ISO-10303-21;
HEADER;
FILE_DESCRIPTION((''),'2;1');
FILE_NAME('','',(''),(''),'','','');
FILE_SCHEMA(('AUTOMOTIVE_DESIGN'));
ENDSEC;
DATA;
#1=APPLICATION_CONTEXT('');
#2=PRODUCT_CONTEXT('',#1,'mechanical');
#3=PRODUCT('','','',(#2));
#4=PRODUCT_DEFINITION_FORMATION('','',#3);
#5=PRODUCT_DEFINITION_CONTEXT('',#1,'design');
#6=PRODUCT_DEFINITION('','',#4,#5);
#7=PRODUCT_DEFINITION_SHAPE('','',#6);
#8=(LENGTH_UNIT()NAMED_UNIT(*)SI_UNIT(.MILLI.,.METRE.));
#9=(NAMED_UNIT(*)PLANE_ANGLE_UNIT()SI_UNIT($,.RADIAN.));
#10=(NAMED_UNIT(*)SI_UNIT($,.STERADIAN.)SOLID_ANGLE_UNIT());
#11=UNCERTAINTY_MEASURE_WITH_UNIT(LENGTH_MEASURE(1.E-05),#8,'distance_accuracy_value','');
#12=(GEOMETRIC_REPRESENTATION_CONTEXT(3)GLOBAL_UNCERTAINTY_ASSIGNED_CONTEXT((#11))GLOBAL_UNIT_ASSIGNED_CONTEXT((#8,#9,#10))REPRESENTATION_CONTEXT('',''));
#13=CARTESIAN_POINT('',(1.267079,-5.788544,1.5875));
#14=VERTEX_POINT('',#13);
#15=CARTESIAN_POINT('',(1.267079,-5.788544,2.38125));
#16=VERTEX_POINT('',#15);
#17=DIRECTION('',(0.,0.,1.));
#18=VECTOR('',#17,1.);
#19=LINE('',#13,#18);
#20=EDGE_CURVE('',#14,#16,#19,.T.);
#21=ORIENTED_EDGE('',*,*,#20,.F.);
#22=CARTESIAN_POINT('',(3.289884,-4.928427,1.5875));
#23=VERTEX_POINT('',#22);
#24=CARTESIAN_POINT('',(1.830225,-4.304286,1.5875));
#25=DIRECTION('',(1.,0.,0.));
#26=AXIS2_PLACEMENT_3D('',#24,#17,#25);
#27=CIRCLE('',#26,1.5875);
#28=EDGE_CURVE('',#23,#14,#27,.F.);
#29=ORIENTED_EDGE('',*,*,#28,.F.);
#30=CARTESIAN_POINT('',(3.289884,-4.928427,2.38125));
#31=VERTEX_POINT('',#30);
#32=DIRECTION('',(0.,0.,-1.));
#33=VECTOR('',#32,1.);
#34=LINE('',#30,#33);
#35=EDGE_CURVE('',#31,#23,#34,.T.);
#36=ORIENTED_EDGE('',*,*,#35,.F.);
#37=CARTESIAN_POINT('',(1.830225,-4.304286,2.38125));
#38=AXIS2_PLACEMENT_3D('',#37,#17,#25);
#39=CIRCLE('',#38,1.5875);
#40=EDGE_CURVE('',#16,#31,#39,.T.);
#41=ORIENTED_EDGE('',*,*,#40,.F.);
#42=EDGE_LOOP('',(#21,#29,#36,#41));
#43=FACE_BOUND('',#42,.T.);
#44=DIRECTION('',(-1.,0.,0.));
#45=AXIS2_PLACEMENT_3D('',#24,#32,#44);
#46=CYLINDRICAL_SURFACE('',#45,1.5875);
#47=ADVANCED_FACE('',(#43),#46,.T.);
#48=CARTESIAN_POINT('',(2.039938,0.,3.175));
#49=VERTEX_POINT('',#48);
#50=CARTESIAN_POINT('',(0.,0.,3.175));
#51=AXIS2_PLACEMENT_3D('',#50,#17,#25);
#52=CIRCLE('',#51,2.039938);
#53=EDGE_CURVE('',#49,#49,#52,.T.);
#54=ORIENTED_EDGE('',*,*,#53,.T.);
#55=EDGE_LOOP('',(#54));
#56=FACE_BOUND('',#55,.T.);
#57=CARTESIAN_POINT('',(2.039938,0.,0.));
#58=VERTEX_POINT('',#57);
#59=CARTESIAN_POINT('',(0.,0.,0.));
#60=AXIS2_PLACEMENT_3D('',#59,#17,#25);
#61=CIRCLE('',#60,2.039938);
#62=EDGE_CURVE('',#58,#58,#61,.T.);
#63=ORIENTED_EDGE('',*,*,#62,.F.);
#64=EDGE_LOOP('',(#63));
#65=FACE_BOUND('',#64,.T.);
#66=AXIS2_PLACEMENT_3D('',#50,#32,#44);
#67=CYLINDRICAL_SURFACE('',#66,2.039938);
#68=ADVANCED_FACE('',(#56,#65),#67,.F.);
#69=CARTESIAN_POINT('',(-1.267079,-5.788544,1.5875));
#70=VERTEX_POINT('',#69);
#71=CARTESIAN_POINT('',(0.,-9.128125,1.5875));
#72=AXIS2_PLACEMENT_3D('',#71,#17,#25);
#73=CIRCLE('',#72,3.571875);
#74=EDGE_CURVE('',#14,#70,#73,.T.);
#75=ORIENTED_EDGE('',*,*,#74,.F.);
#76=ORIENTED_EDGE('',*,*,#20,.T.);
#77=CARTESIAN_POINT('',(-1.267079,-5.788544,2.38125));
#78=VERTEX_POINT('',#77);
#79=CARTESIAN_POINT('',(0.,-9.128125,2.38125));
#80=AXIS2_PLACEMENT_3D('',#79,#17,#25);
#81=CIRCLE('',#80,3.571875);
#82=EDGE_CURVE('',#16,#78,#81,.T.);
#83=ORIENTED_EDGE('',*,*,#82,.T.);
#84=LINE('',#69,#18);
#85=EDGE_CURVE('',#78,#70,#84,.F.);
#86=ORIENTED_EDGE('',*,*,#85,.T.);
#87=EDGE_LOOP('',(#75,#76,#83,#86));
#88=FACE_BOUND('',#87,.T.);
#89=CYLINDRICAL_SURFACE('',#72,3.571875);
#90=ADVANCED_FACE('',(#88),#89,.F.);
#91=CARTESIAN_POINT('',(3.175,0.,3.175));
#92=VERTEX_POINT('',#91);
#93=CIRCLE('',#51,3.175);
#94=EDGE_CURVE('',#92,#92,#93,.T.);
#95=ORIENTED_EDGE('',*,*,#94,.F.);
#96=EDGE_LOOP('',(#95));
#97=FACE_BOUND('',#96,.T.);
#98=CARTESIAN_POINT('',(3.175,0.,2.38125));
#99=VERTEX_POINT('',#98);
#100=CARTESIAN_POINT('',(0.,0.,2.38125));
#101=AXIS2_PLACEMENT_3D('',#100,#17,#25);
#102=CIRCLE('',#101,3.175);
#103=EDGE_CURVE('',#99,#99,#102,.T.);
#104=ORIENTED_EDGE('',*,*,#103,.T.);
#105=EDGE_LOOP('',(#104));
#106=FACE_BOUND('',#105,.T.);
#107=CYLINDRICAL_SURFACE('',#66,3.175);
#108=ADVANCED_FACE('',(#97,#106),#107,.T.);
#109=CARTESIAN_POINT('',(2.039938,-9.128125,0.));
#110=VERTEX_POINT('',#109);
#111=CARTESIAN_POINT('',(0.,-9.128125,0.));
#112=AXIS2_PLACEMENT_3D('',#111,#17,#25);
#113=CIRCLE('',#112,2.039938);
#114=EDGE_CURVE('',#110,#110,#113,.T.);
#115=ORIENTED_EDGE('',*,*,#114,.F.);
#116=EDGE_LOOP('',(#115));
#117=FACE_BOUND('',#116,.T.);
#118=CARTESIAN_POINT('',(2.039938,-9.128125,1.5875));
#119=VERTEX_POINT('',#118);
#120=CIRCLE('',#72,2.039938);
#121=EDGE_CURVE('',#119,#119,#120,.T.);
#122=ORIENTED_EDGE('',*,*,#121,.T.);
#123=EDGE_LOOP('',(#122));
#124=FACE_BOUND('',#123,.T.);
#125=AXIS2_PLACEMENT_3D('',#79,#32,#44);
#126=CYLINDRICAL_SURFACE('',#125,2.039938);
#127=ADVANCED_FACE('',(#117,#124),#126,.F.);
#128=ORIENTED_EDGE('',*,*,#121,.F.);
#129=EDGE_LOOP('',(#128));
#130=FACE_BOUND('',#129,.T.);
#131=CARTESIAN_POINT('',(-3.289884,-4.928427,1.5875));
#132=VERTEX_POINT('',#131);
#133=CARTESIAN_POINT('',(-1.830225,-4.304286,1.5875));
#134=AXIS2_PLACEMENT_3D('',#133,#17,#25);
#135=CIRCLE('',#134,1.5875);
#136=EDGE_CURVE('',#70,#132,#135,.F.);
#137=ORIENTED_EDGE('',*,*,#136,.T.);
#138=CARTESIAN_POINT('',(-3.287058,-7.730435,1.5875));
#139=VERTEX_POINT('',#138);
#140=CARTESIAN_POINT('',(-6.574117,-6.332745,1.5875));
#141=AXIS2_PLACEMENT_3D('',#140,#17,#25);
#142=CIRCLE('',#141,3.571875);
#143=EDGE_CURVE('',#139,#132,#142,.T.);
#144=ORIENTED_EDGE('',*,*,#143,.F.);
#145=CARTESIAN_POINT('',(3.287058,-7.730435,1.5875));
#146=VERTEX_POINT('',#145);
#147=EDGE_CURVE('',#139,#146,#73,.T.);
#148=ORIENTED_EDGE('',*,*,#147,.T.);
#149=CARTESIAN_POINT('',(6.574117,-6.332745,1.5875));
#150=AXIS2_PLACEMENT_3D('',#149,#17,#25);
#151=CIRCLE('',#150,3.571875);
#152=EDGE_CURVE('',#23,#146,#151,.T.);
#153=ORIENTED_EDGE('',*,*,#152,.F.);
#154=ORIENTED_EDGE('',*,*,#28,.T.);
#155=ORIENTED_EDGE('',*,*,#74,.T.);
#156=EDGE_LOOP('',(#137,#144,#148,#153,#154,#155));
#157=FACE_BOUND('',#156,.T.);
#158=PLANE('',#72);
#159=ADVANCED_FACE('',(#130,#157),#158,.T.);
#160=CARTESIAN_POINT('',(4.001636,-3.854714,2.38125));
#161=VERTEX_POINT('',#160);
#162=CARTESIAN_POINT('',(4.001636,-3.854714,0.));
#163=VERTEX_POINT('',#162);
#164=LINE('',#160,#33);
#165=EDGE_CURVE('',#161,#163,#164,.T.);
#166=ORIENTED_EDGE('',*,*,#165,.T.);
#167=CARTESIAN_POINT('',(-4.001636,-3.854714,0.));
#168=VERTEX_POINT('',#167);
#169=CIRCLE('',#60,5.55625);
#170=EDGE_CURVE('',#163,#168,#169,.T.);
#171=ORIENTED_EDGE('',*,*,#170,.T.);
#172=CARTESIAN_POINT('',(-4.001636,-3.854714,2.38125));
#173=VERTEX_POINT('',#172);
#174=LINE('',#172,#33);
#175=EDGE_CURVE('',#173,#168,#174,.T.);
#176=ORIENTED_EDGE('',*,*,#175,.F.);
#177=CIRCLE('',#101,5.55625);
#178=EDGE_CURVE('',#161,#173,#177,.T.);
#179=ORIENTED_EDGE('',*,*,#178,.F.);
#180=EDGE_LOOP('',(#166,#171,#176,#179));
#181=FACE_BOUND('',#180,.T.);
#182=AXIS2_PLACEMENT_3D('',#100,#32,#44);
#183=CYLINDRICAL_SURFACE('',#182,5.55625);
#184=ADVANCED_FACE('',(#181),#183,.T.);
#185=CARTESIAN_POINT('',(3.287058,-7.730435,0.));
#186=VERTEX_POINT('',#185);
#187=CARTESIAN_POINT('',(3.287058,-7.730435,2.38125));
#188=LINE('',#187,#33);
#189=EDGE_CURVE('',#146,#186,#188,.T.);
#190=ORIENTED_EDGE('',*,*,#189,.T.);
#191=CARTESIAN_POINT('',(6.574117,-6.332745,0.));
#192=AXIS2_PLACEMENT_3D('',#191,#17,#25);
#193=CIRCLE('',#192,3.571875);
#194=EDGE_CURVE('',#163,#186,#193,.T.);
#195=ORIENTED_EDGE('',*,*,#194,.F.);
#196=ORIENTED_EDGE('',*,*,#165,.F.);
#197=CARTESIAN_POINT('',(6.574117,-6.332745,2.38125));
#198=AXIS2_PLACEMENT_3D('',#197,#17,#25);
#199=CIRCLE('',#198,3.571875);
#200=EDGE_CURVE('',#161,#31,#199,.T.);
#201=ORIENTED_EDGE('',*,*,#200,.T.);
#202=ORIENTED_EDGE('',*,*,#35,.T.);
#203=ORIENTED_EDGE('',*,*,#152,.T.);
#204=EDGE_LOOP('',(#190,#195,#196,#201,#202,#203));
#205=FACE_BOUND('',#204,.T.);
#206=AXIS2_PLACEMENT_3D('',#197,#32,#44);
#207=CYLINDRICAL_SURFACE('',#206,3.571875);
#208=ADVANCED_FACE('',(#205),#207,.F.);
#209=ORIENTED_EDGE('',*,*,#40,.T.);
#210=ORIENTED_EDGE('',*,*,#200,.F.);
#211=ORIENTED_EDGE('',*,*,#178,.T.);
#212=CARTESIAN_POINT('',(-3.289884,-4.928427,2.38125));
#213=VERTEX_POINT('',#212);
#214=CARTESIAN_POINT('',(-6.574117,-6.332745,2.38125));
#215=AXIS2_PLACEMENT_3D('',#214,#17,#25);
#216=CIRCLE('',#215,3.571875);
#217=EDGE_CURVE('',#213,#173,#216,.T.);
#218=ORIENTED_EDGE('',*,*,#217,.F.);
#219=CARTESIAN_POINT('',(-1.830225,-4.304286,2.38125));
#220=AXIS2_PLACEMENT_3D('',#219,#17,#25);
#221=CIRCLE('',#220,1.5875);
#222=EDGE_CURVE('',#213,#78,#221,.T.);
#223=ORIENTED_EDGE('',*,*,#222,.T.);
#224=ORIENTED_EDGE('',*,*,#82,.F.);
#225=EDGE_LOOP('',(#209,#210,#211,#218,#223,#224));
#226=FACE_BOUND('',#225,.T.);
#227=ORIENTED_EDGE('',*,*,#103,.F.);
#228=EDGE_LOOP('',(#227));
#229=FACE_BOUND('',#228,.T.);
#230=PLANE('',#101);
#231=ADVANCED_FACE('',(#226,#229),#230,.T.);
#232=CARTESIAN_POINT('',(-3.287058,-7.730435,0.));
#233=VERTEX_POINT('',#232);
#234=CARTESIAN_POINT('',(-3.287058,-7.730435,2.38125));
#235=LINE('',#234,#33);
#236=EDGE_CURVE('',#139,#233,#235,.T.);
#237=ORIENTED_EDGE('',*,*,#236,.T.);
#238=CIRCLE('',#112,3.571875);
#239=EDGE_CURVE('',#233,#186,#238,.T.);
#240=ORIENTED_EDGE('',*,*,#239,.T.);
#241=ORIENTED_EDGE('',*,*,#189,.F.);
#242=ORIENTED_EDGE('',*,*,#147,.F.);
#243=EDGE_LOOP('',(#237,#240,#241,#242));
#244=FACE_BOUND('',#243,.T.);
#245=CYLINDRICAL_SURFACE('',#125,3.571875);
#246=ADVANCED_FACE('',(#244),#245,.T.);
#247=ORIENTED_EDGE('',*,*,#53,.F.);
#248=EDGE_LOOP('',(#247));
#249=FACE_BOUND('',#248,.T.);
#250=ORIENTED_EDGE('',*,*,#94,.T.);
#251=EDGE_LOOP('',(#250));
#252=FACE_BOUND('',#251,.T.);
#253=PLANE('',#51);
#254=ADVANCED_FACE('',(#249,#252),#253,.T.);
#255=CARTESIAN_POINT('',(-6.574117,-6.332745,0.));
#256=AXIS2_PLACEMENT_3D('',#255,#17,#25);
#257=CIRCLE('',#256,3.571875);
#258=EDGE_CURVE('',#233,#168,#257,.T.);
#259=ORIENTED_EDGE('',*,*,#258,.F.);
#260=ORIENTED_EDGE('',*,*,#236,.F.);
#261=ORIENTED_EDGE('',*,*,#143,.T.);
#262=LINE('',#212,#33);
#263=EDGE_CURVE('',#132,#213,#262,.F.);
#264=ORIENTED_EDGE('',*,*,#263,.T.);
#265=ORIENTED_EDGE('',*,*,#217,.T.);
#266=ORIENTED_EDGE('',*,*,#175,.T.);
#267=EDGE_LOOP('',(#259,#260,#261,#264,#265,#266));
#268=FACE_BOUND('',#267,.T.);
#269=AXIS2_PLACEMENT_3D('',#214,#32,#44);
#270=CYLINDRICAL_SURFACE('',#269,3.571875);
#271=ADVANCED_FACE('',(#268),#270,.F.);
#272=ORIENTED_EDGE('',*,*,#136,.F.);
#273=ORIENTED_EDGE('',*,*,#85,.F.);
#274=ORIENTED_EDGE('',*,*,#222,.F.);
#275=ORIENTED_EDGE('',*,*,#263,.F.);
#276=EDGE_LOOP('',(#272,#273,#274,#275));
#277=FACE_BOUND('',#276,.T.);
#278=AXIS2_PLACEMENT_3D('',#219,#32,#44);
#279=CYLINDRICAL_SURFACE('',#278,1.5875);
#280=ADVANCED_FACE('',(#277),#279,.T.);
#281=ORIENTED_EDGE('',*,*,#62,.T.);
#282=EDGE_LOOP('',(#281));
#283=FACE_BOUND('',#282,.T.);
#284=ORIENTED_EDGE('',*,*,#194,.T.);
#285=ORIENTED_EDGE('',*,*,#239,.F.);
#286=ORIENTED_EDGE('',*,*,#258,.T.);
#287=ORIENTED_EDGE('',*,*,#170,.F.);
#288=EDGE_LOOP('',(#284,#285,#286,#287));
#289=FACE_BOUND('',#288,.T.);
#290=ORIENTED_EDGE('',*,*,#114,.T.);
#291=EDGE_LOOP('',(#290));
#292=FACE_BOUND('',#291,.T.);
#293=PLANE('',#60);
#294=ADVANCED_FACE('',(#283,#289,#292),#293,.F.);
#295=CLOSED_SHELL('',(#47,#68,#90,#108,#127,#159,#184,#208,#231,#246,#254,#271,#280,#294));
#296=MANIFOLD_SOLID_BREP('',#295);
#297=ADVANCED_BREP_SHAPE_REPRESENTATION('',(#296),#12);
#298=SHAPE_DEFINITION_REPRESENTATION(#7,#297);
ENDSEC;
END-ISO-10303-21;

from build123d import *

# Parameters (mm, degrees)
SKETCH2_R           = 3.175
SKETCH2_R_2         = 2.0399375
BOSS_EXTRUDE1_DEPTH = 2.38125
SKETCH2_6_R         = 3.175
SKETCH2_6_R_2       = 2.0399375
BOSS_EXTRUDE2_DEPTH = 3.175
CUT_EXTRUDE1_START  = -0.79375
SKETCH3_R           = 3.571875
SKETCH3_R_2         = 2.0399375
CUT_EXTRUDE1_DEPTH  = 0.79375
FILLET1_START       = 1.5875
FILLET1_DEPTH       = 0.79375


with BuildPart() as part:
    # Sketch2 → Boss-Extrude1 (new body)
    with BuildSketch(Plane.XY):
        with BuildLine():
            ThreePointArc((-4.001636369, -3.854714053), (-3.061446657, -5.68510333), (-3.28705844, -7.730434825))
            ThreePointArc((-3.28705844, -7.730434825), (3.2e-08, -12.7), (3.287058415, -7.730434766))
            ThreePointArc((3.287058415, -7.730434766), (3.061446657, -5.685103331), (4.001636324, -3.8547141))
            ThreePointArc((4.001636324, -3.8547141), (3.3e-08, 5.55625), (-4.001636369, -3.854714053))
        make_face()
        Circle(SKETCH2_R, mode=Mode.SUBTRACT)
        with Locations((0, -9.128125)):
            Circle(SKETCH2_R_2, mode=Mode.SUBTRACT)
    extrude(amount=BOSS_EXTRUDE1_DEPTH)

    # Sketch2<6> → Boss-Extrude2 (add)
    with BuildSketch(Plane.XY):
        Circle(SKETCH2_6_R)
        Circle(SKETCH2_6_R_2, mode=Mode.SUBTRACT)
    extrude(amount=BOSS_EXTRUDE2_DEPTH)

    # Sketch3 → Cut-Extrude1 (cut)
    with BuildSketch(Plane.XY.offset(2.38125).offset(CUT_EXTRUDE1_START)):
        with Locations((0, -9.128125)):
            Circle(SKETCH3_R)
        with Locations((0, -9.128125)):
            Circle(SKETCH3_R_2, mode=Mode.SUBTRACT)
    extrude(amount=CUT_EXTRUDE1_DEPTH, mode=Mode.SUBTRACT)

    # Fillet1: read off the stored shape, not the designer's step
    # Fillet1 outline → Fillet1 (cut)
    with BuildSketch(Plane.XY.offset(FILLET1_START)):
        with BuildLine():
            ThreePointArc((-3.287058422, -7.730434783), (-2.475434769, -6.553146608), (-1.267079181, -5.788543984))
            ThreePointArc((-1.267079181, -5.788543984), (-2.451421136, -5.765200609), (-3.289884364, -4.928426927))
            ThreePointArc((-3.289884364, -4.928426927), (-3.002243662, -6.329142182), (-3.287058422, -7.730434783))
        make_face()
        with BuildLine():
            ThreePointArc((3.289884364, -4.928426927), (2.451421136, -5.765200609), (1.267079181, -5.788543984))
            ThreePointArc((1.267079181, -5.788543984), (2.475434769, -6.553146608), (3.287058422, -7.730434783))
            ThreePointArc((3.287058422, -7.730434783), (3.002243662, -6.329142182), (3.289884364, -4.928426927))
        make_face()
    extrude(amount=FILLET1_DEPTH, mode=Mode.SUBTRACT)


solid = part.part
